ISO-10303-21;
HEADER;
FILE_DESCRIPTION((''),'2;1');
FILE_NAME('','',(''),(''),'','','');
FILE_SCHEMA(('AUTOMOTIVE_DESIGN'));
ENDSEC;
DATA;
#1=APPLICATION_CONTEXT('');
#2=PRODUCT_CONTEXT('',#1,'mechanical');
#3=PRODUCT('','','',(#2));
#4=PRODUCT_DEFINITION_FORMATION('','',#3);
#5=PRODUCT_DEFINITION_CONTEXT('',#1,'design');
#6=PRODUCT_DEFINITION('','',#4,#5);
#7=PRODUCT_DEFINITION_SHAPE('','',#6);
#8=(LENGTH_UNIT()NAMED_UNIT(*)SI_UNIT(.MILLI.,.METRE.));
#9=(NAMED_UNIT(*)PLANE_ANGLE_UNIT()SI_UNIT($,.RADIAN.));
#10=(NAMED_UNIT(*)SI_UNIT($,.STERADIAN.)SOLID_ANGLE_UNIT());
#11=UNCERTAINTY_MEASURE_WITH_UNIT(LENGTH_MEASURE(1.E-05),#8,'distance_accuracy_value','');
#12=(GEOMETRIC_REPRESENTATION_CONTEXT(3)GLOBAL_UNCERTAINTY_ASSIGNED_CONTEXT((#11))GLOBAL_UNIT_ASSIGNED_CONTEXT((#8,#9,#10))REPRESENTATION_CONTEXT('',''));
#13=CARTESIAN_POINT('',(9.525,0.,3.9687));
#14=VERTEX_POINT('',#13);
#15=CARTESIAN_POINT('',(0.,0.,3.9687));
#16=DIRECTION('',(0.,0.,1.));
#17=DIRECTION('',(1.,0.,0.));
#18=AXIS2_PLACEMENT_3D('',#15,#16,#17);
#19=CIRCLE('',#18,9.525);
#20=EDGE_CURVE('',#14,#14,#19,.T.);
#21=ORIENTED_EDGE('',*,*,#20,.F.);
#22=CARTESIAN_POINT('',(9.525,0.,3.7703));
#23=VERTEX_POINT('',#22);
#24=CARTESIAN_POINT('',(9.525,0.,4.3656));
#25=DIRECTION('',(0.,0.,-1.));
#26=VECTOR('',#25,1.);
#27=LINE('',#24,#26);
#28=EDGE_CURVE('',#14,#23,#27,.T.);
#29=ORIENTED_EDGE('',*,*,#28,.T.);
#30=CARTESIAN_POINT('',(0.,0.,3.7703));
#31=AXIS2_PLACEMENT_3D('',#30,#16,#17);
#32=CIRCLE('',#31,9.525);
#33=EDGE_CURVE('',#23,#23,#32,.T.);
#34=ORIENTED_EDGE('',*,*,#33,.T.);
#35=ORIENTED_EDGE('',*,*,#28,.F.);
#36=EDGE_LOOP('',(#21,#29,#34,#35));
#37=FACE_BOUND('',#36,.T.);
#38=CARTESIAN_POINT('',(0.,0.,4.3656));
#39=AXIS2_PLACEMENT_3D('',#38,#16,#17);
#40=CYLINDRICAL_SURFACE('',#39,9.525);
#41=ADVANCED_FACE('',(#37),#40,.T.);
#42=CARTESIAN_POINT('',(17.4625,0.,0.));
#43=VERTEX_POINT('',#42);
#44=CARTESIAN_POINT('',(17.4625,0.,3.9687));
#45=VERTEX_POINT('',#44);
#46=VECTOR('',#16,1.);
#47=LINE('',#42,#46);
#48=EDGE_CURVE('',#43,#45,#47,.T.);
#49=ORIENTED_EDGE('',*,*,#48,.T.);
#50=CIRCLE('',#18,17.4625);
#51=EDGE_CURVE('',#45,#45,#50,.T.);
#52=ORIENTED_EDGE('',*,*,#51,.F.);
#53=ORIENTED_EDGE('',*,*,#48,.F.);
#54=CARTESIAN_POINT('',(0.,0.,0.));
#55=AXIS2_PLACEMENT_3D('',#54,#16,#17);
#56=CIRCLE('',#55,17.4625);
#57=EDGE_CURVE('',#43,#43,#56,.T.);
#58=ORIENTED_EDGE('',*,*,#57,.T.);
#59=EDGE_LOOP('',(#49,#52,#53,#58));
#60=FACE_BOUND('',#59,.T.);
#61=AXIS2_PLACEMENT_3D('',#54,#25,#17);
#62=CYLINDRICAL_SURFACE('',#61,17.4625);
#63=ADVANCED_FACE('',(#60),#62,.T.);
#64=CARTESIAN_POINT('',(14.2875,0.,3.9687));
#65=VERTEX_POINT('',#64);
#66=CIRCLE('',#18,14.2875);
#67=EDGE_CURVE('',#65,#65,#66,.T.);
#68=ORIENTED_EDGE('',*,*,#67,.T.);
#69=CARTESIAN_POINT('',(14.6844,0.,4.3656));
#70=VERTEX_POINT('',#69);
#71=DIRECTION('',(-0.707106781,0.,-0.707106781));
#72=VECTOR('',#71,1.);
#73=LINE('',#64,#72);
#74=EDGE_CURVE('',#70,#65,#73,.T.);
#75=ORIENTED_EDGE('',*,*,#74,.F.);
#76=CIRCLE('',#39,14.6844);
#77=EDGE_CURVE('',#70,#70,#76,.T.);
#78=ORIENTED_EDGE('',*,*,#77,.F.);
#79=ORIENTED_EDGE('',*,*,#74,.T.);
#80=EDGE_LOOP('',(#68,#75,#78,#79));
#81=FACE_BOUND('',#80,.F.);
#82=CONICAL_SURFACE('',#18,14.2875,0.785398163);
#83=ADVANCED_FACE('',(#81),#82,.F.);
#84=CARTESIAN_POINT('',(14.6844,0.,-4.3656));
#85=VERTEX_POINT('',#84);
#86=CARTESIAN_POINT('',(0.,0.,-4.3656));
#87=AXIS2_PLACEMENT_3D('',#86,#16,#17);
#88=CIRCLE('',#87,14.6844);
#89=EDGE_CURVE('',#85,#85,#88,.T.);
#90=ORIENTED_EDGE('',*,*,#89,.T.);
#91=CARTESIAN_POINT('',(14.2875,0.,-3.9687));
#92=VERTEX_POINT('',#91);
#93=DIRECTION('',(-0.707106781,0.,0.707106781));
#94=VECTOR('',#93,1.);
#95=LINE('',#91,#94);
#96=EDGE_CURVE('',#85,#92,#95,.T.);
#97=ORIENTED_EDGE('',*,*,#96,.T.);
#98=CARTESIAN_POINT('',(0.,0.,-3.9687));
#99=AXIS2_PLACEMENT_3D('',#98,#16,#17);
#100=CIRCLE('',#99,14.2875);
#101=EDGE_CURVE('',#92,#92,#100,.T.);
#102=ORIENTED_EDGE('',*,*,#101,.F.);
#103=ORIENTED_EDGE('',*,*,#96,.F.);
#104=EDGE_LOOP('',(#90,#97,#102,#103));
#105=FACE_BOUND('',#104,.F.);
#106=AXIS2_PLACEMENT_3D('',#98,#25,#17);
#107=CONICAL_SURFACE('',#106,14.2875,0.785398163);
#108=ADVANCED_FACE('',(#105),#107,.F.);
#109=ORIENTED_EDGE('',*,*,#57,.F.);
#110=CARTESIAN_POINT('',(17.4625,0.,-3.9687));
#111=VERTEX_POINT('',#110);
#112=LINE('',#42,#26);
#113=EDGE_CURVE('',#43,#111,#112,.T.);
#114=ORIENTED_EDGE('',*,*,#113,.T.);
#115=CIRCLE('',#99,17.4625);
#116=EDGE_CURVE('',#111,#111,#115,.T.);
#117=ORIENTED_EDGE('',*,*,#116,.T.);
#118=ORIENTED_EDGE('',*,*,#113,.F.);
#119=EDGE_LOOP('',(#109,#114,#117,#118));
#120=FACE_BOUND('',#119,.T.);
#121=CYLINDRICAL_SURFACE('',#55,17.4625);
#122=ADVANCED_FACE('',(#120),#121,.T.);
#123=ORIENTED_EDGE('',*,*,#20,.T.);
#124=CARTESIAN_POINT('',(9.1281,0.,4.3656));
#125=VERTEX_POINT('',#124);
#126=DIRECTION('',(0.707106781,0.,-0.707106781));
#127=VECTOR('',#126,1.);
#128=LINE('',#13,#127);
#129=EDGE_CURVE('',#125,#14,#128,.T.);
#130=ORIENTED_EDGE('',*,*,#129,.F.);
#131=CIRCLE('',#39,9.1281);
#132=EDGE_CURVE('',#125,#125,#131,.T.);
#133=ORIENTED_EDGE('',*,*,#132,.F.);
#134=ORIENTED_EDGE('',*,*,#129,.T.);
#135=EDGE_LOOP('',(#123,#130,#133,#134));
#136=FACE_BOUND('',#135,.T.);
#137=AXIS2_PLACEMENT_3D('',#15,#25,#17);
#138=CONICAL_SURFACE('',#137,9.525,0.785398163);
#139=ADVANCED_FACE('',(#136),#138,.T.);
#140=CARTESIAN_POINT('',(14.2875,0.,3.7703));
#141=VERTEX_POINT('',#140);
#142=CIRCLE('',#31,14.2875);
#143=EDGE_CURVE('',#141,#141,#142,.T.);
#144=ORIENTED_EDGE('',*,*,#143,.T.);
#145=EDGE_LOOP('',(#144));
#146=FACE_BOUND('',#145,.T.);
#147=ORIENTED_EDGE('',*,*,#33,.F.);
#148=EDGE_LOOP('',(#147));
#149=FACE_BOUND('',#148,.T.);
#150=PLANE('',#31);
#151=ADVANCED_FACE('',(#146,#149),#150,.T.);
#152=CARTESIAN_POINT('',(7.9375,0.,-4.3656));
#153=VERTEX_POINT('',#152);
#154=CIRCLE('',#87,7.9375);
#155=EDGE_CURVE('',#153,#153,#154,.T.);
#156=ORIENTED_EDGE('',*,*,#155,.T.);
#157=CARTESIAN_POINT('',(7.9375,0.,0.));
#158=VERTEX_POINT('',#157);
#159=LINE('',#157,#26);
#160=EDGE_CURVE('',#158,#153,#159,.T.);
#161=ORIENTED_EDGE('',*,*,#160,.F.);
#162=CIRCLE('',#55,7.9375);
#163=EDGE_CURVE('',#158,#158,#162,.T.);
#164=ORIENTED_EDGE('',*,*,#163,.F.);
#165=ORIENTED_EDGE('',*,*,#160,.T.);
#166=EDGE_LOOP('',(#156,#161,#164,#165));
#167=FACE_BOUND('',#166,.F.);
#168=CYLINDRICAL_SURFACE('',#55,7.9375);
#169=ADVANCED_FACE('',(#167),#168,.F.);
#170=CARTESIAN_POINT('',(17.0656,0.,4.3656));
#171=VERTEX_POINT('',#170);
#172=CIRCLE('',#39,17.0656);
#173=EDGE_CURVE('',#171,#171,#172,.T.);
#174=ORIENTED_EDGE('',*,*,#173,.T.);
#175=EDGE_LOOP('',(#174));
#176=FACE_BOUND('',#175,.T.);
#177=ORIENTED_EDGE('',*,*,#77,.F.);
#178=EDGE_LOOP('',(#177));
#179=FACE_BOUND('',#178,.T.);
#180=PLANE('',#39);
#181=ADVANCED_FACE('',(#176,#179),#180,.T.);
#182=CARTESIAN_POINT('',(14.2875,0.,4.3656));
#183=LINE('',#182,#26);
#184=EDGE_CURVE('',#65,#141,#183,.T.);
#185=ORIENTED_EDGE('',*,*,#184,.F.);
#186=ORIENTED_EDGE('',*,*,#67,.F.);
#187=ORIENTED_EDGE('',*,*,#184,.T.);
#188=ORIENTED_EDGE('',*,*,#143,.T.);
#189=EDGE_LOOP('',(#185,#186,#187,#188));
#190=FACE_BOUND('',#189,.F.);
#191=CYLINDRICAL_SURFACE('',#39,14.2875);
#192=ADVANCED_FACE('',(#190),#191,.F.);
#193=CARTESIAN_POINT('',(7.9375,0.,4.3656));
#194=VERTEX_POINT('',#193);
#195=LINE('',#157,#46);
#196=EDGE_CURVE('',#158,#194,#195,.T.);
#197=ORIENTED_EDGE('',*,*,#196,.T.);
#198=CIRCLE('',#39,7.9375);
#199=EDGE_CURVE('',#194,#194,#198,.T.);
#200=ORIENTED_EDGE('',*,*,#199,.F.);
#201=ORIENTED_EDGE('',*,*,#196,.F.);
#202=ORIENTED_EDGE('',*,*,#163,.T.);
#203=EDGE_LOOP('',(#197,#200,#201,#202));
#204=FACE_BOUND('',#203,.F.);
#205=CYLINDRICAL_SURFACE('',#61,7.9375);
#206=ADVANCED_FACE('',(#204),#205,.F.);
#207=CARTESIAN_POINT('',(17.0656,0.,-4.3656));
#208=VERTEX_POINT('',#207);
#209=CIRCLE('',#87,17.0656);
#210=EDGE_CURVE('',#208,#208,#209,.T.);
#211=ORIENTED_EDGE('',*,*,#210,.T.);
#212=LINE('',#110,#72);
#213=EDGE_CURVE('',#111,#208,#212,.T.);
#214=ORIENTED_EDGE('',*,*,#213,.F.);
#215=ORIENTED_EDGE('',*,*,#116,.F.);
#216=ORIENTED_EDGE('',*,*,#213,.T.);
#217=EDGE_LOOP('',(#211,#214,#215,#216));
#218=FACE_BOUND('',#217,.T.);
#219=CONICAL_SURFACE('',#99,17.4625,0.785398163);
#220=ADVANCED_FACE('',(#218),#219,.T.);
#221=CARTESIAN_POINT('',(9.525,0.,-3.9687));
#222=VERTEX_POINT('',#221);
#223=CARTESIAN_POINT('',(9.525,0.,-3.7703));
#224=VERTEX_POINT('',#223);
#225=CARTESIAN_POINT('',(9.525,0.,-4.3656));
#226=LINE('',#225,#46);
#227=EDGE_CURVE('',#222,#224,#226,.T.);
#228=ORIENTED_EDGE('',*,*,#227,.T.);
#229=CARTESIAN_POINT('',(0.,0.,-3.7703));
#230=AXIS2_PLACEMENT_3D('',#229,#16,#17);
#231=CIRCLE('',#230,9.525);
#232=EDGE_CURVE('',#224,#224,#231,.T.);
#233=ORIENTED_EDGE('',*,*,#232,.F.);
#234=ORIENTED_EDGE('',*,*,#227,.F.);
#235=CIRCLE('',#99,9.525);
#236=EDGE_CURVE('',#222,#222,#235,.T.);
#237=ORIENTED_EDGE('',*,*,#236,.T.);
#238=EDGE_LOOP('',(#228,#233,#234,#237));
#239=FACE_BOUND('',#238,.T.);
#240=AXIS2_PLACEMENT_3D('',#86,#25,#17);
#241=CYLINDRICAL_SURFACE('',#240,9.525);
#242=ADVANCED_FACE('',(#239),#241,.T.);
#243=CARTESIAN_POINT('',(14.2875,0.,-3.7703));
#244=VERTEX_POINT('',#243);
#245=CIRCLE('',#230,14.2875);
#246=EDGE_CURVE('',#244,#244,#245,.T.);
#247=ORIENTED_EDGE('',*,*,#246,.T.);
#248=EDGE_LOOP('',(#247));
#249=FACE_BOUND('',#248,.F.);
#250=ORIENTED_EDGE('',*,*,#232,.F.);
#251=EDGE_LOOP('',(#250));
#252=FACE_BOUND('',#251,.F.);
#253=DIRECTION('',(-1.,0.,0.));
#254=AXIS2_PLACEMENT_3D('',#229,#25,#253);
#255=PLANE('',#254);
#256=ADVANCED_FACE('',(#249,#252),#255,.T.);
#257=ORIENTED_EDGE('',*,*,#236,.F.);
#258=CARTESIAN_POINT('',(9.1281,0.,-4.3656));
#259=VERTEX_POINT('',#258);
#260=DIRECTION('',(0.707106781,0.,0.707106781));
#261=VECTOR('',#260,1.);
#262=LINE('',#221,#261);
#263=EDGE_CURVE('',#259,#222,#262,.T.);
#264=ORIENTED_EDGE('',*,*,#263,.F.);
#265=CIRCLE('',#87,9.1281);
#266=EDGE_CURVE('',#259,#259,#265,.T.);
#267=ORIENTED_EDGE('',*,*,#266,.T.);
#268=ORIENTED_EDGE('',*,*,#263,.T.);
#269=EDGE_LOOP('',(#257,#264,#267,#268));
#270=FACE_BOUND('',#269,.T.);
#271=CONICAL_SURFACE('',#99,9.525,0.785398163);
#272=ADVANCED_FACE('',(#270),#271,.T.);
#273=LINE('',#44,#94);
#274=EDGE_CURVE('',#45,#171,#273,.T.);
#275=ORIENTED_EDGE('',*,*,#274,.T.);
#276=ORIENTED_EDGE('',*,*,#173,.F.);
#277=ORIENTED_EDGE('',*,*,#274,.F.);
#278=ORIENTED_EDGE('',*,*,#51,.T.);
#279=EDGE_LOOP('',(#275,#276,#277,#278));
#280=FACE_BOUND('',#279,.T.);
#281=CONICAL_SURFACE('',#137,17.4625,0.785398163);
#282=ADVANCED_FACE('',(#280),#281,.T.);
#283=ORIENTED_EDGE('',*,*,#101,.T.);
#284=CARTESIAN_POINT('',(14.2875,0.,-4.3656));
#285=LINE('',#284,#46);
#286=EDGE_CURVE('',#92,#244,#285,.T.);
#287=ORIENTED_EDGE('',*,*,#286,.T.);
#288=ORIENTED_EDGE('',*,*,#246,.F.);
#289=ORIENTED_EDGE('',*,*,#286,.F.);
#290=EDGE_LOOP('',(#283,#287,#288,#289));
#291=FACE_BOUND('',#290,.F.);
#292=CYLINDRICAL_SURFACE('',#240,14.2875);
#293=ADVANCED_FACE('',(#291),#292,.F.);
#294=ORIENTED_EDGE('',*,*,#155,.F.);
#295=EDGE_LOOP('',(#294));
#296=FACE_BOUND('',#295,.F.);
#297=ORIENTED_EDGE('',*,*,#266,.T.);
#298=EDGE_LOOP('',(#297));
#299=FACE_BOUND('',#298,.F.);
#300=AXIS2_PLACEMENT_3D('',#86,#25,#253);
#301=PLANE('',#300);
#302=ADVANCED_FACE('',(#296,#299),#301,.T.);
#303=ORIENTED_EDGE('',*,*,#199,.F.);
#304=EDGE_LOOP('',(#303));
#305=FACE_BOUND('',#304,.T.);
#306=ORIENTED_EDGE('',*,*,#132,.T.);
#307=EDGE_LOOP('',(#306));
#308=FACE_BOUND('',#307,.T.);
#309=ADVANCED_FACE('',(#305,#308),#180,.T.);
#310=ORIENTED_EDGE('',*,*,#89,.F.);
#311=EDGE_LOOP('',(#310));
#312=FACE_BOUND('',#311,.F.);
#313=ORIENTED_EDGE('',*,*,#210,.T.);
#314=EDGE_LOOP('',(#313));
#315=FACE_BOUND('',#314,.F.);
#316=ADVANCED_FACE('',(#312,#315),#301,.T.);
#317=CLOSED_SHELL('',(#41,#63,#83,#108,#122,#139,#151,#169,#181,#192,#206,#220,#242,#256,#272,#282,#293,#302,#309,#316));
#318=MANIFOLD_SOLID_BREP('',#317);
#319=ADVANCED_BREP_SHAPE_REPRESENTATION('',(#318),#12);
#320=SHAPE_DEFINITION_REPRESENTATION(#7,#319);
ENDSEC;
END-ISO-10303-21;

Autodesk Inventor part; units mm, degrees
ref_plane "YZ Plane" through (0, 0, 0) normal (1, 0, 0) x (0, 1, 0)
ref_plane "XZ Plane" through (0, 0, 0) normal (0, 1, 0) x (-1, 0, 0)
ref_plane "XY Plane" through (0, 0, 0) normal (0, 0, 1) x (1, 0, 0)
sketch "Sketch1" plane through (0, 0, 0) normal (0, 0, 1) x (1, 0, 0)
  circle A0 centre (0, 0) radius 17.4625
  circle A1 centre (0, 0) radius 7.9375
  dimension "d0" = 34.925
  dimension "d2" = 15.875
extrude "Extrusion1" add sketch "Sketch1" along normal blind 4.3656
sketch "Sketch2" plane through (0, 0, 4.3656) normal (0, 0, 1) x (1, 0, 0)
  circle A0 centre (0, 0) radius 17.4625 projected
  circle A1 centre (0, 0) radius 9.525
  circle A2 centre (0, 0) radius 14.2875
  dimension "d5" = 19.05
  dimension "d8" = 28.575
extrude "Extrusion2" cut sketch "Sketch2" against normal blind 0.5953 contours A2
chamfer "Chamfer1" distance 0.3969 angle 45 3 edges at (-17.4625, 0, 4.3656) (-9.525, 0, 4.3656) (-14.2875, 0, 4.3656)
mirror "Mirror1" about plane through (0, 0, 0) normal (0, 0, -1)
properties part number "R10-2RS"
